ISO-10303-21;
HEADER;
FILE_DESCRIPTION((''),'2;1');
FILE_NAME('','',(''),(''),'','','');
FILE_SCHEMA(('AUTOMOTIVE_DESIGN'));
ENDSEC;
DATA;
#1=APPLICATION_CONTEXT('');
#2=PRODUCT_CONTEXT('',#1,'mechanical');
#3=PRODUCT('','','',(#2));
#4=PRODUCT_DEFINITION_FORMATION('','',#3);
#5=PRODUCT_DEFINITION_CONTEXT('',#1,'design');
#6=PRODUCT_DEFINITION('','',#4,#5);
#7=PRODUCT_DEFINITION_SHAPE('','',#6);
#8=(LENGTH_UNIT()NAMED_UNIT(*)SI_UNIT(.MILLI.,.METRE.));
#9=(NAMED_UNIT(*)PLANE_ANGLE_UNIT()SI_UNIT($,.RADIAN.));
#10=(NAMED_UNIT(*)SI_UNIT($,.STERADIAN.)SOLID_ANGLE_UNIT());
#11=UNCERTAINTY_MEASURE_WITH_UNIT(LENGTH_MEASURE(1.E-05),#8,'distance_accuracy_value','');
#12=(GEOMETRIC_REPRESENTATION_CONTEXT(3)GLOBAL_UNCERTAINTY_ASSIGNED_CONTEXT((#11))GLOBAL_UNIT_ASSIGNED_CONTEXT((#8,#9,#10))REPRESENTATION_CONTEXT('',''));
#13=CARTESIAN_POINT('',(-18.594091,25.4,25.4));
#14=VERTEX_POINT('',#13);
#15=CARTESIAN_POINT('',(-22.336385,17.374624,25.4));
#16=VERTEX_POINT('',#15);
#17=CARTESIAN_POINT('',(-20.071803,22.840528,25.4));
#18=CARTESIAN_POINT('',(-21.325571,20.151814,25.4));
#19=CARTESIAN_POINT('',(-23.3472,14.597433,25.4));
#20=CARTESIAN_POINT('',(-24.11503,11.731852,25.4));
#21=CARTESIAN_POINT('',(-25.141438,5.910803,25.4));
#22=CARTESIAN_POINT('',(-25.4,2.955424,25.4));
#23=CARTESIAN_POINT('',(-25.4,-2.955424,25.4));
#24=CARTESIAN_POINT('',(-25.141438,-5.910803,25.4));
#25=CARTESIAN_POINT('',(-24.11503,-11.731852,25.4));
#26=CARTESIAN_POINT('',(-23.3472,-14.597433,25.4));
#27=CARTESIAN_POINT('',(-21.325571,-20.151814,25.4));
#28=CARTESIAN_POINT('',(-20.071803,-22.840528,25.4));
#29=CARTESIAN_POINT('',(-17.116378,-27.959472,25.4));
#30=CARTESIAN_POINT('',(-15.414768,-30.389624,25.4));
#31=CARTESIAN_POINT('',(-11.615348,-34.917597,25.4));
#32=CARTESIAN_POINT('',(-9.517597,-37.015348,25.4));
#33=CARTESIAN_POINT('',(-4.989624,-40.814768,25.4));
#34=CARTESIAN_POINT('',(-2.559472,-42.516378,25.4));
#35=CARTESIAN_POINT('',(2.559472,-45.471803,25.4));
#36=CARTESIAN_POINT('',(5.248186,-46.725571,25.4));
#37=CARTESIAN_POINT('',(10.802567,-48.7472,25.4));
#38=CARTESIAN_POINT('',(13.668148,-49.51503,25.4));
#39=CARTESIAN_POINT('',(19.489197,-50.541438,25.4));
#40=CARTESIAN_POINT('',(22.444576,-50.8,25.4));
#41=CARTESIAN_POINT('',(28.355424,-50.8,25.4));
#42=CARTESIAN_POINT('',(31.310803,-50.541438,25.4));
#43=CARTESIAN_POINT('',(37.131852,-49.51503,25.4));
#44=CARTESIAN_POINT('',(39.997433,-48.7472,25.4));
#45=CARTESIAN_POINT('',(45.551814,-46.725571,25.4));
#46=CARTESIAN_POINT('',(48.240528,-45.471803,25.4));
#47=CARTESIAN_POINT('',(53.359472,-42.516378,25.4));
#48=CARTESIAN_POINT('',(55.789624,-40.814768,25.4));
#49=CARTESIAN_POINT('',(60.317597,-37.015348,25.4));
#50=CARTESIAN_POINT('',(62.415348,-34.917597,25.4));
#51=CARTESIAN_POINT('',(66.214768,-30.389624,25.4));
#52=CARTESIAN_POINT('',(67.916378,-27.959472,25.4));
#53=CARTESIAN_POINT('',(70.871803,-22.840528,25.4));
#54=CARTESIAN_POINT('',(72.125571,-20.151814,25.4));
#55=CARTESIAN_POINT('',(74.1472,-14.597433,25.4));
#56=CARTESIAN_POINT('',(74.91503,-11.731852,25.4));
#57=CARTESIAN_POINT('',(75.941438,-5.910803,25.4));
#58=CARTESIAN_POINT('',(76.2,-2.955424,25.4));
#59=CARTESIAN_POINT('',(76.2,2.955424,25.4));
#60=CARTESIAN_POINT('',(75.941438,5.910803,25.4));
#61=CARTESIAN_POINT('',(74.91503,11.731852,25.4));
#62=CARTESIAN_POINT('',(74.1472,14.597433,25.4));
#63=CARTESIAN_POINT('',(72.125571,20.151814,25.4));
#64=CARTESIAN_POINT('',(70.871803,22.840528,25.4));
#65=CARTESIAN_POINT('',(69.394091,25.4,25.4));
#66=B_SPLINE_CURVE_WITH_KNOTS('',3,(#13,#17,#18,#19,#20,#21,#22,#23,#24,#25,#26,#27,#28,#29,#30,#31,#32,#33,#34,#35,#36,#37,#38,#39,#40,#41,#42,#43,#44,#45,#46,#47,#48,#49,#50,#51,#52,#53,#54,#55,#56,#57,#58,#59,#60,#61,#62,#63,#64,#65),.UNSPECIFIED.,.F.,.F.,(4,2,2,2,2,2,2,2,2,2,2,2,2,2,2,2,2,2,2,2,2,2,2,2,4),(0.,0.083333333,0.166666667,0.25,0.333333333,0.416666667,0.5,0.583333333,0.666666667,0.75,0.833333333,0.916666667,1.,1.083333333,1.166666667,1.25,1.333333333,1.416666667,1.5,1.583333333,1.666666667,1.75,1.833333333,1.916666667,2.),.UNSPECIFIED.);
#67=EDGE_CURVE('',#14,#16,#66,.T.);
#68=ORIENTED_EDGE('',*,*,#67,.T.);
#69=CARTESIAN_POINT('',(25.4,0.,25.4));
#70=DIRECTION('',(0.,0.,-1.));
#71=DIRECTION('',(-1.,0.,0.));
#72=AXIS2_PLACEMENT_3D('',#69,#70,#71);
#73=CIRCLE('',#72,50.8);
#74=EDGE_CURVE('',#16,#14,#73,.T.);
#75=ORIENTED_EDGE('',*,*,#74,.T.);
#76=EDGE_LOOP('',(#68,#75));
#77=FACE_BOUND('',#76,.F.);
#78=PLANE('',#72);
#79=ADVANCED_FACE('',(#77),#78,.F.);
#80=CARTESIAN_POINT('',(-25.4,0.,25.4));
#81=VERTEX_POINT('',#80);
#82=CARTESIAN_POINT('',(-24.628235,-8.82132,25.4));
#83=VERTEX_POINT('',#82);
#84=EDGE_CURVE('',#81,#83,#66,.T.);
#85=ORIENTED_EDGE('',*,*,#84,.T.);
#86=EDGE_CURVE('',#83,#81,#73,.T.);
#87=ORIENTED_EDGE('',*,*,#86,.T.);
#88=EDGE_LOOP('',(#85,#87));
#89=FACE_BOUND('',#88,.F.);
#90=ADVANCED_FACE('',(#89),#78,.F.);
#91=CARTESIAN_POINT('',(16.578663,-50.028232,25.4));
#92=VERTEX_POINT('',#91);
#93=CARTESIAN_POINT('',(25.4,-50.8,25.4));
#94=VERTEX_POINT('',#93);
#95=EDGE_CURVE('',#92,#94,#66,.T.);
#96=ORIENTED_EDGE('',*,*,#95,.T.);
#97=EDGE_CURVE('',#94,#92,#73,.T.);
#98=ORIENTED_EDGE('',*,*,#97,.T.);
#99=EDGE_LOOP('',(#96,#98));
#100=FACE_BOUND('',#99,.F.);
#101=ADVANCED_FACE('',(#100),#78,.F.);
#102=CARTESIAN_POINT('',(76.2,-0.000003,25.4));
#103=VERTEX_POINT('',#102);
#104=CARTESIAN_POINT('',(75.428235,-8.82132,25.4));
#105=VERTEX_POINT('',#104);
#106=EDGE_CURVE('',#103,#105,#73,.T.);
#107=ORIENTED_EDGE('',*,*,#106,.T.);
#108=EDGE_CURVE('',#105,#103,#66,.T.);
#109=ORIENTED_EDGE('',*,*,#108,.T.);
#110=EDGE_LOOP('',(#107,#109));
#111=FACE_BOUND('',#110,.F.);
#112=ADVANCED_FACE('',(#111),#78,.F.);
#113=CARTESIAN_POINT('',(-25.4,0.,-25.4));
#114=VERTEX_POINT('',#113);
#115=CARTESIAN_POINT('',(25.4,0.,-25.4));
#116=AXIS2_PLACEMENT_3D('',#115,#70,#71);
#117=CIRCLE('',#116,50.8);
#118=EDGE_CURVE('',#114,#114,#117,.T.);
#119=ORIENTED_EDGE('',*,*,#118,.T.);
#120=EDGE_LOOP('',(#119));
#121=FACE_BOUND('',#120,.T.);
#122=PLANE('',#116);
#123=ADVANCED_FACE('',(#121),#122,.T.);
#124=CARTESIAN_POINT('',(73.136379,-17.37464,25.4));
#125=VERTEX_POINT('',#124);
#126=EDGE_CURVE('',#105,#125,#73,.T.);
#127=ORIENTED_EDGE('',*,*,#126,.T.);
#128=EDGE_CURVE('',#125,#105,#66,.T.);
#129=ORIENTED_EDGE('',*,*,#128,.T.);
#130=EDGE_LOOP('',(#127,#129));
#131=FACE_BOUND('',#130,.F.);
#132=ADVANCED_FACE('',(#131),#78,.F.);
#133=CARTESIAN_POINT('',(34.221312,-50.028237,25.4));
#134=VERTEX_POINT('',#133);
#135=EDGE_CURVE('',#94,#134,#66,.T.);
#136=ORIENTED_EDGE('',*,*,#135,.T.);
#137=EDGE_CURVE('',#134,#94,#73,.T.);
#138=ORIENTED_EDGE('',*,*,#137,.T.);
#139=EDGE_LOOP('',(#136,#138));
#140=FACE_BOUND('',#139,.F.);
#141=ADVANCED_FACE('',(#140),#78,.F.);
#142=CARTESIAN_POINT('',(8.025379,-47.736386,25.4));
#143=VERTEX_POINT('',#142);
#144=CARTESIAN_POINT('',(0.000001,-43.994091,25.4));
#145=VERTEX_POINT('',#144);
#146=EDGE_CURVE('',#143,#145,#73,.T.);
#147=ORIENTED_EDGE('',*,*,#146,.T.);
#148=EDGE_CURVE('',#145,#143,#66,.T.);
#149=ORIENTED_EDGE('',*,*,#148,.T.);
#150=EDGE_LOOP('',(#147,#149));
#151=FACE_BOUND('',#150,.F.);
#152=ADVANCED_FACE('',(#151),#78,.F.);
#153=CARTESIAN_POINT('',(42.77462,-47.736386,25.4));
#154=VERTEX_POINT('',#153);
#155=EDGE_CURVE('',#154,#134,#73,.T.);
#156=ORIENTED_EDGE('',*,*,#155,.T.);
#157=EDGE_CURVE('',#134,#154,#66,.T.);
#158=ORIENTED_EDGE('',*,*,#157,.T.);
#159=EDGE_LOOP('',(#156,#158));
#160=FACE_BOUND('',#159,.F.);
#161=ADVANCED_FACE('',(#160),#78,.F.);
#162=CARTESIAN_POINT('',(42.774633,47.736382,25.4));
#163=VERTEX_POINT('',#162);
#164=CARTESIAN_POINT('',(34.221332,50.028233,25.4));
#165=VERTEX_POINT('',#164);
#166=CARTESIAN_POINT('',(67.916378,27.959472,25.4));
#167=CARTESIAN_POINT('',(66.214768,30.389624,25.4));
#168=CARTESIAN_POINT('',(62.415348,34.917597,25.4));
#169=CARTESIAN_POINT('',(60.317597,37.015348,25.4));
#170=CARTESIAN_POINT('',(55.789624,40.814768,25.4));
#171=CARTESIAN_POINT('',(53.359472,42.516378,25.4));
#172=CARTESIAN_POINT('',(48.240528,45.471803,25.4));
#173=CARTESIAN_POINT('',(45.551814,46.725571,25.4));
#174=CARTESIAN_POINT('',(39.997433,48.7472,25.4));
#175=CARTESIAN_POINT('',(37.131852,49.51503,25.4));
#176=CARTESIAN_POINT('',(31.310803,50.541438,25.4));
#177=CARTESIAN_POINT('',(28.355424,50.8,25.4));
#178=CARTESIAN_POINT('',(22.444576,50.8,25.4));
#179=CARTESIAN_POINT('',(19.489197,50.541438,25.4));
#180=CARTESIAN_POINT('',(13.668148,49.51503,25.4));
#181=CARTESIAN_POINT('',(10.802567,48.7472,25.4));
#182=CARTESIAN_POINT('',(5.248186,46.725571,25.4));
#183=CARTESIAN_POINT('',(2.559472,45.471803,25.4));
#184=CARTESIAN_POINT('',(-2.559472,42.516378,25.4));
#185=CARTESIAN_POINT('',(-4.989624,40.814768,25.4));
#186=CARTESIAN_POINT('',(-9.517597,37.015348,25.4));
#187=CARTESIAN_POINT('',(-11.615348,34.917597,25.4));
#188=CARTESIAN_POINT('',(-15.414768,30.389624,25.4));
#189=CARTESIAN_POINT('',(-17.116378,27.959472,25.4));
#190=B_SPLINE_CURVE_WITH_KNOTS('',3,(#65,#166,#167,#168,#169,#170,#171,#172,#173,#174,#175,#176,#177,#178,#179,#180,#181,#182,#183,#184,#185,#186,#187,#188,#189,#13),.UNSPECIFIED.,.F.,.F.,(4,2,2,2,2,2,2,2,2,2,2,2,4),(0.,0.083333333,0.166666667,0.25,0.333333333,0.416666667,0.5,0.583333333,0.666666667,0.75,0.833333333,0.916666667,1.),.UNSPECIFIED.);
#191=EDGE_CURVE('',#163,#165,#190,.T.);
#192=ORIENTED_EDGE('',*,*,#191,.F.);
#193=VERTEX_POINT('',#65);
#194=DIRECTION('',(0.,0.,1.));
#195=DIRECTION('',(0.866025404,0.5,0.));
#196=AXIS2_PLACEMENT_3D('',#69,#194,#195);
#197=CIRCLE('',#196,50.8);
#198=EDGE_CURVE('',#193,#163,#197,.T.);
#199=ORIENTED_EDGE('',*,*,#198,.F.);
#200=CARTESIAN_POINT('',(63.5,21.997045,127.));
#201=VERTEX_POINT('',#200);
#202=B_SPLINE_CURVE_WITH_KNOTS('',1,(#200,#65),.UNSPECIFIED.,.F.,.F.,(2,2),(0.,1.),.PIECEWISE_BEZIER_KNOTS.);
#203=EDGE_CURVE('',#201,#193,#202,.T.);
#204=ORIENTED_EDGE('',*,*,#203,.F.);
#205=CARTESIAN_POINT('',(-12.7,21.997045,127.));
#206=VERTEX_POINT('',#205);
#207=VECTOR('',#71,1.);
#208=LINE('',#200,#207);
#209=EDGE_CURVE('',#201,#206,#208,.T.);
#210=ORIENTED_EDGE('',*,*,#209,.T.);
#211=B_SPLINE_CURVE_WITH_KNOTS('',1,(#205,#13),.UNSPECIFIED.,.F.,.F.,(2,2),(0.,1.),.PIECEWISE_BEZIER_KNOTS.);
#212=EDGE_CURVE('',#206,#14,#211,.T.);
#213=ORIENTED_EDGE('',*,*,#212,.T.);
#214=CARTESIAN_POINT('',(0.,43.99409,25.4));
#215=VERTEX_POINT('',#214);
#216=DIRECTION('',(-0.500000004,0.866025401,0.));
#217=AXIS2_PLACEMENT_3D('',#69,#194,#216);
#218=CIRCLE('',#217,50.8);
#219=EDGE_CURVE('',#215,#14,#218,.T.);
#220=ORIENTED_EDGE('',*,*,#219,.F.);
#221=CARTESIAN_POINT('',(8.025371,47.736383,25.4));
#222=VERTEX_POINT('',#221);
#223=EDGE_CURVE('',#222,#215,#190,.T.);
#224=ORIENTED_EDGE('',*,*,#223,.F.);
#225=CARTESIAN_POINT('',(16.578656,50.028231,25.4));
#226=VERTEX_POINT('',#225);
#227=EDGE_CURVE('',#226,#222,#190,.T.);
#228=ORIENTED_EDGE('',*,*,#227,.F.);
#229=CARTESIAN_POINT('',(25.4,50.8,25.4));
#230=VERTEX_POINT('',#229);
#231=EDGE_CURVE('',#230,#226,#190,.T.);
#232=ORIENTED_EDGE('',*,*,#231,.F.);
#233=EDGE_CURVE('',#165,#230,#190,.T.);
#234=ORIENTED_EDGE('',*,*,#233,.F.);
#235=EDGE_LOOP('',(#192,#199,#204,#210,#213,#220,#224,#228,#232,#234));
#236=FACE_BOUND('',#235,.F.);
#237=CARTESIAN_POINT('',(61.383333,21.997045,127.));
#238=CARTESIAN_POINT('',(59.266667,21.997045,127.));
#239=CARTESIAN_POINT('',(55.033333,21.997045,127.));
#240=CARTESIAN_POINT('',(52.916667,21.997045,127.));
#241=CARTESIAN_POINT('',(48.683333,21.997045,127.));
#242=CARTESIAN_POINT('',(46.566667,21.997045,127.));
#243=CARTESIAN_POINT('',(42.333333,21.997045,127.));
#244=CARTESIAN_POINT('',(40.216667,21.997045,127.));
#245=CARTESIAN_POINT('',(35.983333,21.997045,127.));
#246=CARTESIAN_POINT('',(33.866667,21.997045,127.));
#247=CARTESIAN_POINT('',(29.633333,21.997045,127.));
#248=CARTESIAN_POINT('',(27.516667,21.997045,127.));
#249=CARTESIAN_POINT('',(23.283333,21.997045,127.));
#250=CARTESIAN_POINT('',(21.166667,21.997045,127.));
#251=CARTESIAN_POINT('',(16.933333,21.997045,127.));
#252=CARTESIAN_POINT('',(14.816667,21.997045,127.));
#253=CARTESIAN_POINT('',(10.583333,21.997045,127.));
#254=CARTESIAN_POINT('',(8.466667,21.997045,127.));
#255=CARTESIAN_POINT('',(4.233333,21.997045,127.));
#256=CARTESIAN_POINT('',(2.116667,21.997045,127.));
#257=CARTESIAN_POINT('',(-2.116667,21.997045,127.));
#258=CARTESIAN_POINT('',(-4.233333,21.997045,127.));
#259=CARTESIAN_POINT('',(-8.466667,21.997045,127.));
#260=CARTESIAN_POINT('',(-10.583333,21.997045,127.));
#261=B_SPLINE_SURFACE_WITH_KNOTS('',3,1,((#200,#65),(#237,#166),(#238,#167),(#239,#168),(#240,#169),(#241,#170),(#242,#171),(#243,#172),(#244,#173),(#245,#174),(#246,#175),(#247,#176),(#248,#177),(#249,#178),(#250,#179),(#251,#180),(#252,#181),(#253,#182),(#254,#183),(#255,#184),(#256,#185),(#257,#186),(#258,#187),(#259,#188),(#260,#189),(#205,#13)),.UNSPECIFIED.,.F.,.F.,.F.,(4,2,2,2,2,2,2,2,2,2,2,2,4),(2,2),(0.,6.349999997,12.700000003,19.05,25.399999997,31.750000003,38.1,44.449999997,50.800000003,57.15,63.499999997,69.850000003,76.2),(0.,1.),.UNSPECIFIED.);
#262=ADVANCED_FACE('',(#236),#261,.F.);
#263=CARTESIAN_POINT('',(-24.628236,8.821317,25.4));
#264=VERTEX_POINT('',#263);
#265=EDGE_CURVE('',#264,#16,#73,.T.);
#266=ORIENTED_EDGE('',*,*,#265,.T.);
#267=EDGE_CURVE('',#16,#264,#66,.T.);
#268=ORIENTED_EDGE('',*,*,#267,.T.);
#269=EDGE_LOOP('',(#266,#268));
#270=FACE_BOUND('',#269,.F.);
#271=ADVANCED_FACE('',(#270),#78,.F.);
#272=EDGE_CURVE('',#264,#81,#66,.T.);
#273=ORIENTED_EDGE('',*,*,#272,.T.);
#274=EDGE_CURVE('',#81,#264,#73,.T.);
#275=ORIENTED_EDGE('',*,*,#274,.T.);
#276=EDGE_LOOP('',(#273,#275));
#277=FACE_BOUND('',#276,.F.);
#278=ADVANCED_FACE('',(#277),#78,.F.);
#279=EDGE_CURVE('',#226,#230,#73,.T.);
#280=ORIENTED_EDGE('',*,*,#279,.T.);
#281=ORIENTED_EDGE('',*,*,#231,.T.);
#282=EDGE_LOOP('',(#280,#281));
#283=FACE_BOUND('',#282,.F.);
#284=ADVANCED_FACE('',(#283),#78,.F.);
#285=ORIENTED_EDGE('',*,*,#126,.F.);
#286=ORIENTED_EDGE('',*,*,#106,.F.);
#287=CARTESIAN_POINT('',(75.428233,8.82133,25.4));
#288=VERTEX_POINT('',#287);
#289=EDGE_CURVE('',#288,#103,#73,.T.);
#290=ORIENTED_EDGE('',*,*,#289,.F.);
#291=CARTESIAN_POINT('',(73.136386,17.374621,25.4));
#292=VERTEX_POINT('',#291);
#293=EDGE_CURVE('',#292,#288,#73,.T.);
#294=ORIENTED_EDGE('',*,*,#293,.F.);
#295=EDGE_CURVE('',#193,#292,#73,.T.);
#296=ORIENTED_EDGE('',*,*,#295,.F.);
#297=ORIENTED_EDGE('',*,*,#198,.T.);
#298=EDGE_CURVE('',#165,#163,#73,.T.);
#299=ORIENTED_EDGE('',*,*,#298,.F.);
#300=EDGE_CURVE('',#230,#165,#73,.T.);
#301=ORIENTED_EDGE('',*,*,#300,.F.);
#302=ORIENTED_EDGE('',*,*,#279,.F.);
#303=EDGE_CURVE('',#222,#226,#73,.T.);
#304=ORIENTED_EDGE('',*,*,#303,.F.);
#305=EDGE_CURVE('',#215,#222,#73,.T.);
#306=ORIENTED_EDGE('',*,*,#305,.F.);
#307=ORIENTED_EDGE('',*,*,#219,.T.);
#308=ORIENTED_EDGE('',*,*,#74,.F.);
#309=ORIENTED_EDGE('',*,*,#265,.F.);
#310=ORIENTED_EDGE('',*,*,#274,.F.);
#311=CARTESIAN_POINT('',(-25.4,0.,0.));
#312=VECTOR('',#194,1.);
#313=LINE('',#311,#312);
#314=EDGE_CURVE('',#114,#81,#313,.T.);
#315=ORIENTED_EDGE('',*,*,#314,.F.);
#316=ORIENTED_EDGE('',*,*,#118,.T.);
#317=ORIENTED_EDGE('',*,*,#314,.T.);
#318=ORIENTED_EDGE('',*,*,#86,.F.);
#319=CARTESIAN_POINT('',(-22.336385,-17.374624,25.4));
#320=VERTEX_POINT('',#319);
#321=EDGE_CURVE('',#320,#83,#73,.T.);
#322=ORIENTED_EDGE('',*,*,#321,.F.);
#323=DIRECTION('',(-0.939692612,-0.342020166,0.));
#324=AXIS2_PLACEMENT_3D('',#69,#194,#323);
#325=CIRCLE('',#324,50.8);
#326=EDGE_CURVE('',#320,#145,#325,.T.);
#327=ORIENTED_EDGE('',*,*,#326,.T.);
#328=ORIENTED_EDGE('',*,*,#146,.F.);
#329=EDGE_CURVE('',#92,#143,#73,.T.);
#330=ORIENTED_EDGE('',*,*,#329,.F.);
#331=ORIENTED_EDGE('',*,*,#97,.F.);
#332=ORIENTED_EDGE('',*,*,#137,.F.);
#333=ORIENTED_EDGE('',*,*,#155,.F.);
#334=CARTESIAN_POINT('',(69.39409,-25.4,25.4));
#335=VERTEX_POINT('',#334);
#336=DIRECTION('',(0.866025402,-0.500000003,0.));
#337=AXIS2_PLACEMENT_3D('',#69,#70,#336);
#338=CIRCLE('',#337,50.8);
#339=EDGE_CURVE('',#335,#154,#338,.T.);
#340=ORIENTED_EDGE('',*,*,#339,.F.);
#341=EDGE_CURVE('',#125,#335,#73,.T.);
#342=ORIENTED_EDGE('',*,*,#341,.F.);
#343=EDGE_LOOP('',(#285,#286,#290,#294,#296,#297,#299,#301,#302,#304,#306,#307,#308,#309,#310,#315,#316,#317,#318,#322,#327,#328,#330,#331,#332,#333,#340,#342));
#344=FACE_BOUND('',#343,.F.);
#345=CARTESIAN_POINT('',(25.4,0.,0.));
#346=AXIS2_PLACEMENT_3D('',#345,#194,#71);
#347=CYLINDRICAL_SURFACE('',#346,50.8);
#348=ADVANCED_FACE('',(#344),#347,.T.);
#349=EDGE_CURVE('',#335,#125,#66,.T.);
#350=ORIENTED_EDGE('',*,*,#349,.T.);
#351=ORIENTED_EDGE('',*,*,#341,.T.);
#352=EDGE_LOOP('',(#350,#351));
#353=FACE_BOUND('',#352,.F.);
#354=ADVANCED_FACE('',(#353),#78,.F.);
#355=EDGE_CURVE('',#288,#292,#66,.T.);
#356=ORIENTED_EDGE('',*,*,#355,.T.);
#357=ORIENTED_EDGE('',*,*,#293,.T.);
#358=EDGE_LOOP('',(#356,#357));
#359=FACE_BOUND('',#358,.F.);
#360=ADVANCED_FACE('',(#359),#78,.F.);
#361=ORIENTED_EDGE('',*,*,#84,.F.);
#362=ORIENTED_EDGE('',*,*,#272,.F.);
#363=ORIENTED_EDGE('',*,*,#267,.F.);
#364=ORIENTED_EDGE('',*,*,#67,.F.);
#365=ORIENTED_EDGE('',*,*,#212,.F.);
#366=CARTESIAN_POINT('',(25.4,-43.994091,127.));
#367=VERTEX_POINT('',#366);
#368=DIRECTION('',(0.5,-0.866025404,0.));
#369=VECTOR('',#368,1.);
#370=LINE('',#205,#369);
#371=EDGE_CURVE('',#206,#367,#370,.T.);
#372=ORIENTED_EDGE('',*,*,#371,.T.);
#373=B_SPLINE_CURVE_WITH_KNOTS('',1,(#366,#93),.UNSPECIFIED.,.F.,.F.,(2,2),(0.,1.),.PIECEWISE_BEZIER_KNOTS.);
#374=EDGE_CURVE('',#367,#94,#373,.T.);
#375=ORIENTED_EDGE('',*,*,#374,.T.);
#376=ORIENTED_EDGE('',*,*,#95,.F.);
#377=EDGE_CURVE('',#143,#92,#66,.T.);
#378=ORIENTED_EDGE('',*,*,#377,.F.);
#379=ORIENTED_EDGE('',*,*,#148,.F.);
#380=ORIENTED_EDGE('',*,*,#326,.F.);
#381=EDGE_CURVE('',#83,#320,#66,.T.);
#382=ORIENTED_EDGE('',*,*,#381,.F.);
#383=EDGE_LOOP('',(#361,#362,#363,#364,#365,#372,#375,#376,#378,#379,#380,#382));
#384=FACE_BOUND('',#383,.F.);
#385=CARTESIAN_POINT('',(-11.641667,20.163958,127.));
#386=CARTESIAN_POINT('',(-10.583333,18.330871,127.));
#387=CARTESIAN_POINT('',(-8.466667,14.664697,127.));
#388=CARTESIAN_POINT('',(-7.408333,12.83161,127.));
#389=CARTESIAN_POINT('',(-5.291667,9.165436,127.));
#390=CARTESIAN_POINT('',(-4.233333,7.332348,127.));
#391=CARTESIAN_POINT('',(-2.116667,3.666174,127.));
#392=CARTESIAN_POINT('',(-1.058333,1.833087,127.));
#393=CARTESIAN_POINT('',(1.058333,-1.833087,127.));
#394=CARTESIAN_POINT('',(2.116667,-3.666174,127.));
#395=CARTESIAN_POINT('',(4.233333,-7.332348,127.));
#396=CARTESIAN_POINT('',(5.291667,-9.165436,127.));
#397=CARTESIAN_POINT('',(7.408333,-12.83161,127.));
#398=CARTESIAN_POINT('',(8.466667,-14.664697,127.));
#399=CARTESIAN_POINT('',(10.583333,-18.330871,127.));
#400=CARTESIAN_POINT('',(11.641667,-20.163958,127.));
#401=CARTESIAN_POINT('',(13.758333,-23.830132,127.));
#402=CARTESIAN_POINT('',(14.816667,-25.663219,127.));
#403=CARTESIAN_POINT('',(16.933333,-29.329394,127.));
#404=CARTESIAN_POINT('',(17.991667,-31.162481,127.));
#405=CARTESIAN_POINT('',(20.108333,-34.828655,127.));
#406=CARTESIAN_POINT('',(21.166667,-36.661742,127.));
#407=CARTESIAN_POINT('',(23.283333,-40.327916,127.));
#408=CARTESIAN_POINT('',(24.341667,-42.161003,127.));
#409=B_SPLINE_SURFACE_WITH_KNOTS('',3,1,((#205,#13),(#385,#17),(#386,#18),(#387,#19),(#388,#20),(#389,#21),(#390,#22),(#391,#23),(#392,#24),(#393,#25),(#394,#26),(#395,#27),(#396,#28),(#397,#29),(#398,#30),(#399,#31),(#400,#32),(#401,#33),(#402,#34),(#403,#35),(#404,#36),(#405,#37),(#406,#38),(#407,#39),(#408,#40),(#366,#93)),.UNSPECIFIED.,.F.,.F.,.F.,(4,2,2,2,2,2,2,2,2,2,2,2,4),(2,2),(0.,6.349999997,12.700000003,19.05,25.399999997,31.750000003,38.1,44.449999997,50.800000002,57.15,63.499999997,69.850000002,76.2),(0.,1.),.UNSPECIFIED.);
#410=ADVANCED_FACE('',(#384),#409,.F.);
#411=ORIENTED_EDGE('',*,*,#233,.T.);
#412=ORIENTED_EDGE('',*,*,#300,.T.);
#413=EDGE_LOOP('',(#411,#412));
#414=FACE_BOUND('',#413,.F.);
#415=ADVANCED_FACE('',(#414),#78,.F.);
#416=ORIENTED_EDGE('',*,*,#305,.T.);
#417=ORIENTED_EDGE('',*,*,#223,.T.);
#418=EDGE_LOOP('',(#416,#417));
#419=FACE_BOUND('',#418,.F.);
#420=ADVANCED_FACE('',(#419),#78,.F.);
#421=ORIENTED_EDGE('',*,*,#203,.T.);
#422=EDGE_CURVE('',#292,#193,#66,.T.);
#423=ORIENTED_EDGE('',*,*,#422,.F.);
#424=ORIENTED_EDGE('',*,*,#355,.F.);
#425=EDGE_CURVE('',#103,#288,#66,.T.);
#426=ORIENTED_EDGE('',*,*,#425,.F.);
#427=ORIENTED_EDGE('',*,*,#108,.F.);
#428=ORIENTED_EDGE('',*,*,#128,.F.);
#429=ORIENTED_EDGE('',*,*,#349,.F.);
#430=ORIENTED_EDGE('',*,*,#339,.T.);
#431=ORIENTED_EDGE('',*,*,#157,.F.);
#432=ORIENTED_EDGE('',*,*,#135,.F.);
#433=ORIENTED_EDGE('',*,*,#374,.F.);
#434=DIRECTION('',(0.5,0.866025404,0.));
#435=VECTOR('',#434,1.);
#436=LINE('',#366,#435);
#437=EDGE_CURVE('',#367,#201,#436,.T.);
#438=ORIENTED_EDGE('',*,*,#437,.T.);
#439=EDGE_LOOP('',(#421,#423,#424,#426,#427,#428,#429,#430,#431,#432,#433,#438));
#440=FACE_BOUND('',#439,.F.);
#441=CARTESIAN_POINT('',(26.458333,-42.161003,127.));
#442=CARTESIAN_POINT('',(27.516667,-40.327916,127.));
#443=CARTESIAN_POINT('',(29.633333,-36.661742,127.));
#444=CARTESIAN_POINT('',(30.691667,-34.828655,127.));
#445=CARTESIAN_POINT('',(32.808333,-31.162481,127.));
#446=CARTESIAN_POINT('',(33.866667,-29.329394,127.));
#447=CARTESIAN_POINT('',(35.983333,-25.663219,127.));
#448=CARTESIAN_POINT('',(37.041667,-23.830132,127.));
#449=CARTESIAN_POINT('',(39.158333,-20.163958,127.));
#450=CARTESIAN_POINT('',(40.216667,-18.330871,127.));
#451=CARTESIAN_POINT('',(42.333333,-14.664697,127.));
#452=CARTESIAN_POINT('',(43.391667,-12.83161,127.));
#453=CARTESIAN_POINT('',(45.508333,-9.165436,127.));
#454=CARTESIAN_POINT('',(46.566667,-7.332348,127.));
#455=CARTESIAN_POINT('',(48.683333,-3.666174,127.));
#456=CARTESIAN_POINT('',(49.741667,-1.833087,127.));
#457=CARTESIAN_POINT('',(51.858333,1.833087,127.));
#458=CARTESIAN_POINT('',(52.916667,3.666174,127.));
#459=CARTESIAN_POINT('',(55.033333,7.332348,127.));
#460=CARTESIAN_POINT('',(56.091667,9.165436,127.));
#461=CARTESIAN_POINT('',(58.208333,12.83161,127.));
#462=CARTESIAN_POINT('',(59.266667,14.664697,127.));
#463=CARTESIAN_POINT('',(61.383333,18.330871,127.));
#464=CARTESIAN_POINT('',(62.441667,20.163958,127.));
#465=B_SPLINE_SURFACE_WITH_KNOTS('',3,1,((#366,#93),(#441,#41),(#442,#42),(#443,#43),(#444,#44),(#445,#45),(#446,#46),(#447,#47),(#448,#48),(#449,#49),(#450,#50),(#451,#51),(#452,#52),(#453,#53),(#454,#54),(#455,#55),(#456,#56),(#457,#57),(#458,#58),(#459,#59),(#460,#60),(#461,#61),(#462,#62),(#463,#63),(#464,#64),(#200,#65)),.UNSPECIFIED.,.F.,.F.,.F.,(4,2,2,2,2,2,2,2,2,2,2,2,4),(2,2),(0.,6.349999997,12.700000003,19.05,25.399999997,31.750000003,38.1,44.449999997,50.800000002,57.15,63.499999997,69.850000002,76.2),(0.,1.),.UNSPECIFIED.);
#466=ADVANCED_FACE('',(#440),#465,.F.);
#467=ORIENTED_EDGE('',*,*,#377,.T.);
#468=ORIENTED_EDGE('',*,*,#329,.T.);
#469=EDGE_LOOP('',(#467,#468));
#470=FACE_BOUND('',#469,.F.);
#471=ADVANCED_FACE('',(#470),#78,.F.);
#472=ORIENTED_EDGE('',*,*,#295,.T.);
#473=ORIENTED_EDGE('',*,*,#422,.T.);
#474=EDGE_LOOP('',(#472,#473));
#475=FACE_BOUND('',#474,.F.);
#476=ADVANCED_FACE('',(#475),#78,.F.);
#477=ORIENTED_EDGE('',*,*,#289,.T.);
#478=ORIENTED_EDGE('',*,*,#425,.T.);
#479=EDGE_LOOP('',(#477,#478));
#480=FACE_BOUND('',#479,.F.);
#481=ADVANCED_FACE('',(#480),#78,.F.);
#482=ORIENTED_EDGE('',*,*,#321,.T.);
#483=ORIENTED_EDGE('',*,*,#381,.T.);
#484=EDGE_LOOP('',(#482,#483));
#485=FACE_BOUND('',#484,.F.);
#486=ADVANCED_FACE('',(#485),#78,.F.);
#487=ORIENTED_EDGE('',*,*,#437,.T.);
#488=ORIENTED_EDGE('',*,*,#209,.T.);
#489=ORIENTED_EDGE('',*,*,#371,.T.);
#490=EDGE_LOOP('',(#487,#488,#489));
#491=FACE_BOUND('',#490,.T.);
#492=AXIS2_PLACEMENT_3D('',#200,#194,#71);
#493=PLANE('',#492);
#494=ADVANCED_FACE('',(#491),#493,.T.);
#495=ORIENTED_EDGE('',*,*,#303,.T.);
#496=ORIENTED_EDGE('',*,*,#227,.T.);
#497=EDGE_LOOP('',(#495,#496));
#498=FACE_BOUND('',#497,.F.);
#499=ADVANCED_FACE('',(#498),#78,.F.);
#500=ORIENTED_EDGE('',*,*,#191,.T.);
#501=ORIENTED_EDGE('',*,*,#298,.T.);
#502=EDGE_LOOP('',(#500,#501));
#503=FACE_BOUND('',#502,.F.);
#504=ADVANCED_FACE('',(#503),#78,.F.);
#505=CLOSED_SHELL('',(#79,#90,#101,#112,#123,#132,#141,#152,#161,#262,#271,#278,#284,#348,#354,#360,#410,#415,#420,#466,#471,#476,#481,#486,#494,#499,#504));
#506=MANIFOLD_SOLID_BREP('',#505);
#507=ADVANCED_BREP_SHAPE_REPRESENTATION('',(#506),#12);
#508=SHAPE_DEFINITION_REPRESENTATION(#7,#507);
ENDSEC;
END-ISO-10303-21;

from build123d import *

# Parameters (mm, degrees)
F0_W = 50.8
F0_H = 50.8


# Not quite as in the source:
# - the arcs of a loft's sections are written as splines that run evenly, so that the points pair up as in the source's solid


with BuildPart() as f1:
    # F0 (on Front) → F1 (revolve)
    with BuildSketch(Plane.XZ):
        Rectangle(F0_W, F0_H)
    revolve(axis=Axis((25.4, 0, 0), (0, 0, -1)))

    # F3 (on offset) → F5 section 0
    with BuildSketch(Plane.XY.offset(127)):
        Polygon((63.5, 21.9970452561), (-12.7, 21.9970452561), (25.4, -43.9940905122), align=None)
    # F4 (on face) → F5 section 1
    with BuildSketch(Plane.XY.offset(25.4)):
        with BuildLine():
            add(Edge.make_bspline(
                [(69.3940905122, 25.4), (67.9163784122, 27.9594724362), (66.2147677676, 30.3896242866), (62.4153476533, 34.9175968576), (60.3175968576, 37.0153476533), (55.7896242866, 40.8147677676), (53.3594724362, 42.5163784122), (48.2405275638, 45.4718026123), (45.551813593, 46.7255705274), (39.9974329689, 48.7471997444), (37.1318520911, 49.5150298264), (31.3108027598, 50.5414378796), (28.3554242, 50.8), (22.4445758, 50.8), (19.4891972402, 50.5414378796), (13.6681479089, 49.5150298264), (10.8025670311, 48.7471997444), (5.248186407, 46.7255705274), (2.5594724362, 45.4718026123), (-2.5594724362, 42.5163784122), (-4.9896242866, 40.8147677676), (-9.5175968576, 37.0153476533), (-11.6153476533, 34.9175968576), (-15.4147677676, 30.3896242866), (-17.1163784122, 27.9594724362), (-18.5940905122, 25.4)],
                knots=[0, 0, 0, 0, 0.0833333333, 0.0833333333, 0.1666666667, 0.1666666667, 0.25, 0.25, 0.3333333333, 0.3333333333, 0.4166666667, 0.4166666667, 0.5, 0.5, 0.5833333333, 0.5833333333, 0.6666666667, 0.6666666667, 0.75, 0.75, 0.8333333333, 0.8333333333, 0.9166666667, 0.9166666667, 1, 1, 1, 1], degree=3))
            add(Edge.make_bspline(
                [(-18.5940905122, 25.4), (-20.0718026123, 22.8405275638), (-21.3255705274, 20.151813593), (-23.3471997444, 14.5974329689), (-24.1150298264, 11.7318520911), (-25.1414378796, 5.9108027598), (-25.4, 2.9554242), (-25.4, -2.9554242), (-25.1414378796, -5.9108027598), (-24.1150298264, -11.7318520911), (-23.3471997444, -14.5974329689), (-21.3255705274, -20.151813593), (-20.0718026123, -22.8405275638), (-17.1163784122, -27.9594724362), (-15.4147677676, -30.3896242866), (-11.6153476533, -34.9175968576), (-9.5175968576, -37.0153476533), (-4.9896242866, -40.8147677676), (-2.5594724362, -42.5163784122), (2.5594724362, -45.4718026123), (5.248186407, -46.7255705274), (10.8025670311, -48.7471997444), (13.6681479089, -49.5150298264), (19.4891972402, -50.5414378796), (22.4445758, -50.8), (25.4, -50.8)],
                knots=[0, 0, 0, 0, 0.0833333333, 0.0833333333, 0.1666666667, 0.1666666667, 0.25, 0.25, 0.3333333333, 0.3333333333, 0.4166666667, 0.4166666667, 0.5, 0.5, 0.5833333333, 0.5833333333, 0.6666666667, 0.6666666667, 0.75, 0.75, 0.8333333333, 0.8333333333, 0.9166666667, 0.9166666667, 1, 1, 1, 1], degree=3))
            add(Edge.make_bspline(
                [(25.4, -50.8), (28.3554242, -50.8), (31.3108027598, -50.5414378796), (37.1318520911, -49.5150298264), (39.9974329689, -48.7471997444), (45.551813593, -46.7255705274), (48.2405275638, -45.4718026123), (53.3594724362, -42.5163784122), (55.7896242866, -40.8147677676), (60.3175968576, -37.0153476533), (62.4153476533, -34.9175968576), (66.2147677676, -30.3896242866), (67.9163784122, -27.9594724362), (70.8718026123, -22.8405275638), (72.1255705274, -20.151813593), (74.1471997444, -14.5974329689), (74.9150298264, -11.7318520911), (75.9414378796, -5.9108027598), (76.2, -2.9554242), (76.2, 2.9554242), (75.9414378796, 5.9108027598), (74.9150298264, 11.7318520911), (74.1471997444, 14.5974329689), (72.1255705274, 20.151813593), (70.8718026123, 22.8405275638), (69.3940905122, 25.4)],
                knots=[0, 0, 0, 0, 0.0833333333, 0.0833333333, 0.1666666667, 0.1666666667, 0.25, 0.25, 0.3333333333, 0.3333333333, 0.4166666667, 0.4166666667, 0.5, 0.5, 0.5833333333, 0.5833333333, 0.6666666667, 0.6666666667, 0.75, 0.75, 0.8333333333, 0.8333333333, 0.9166666667, 0.9166666667, 1, 1, 1, 1], degree=3))
        make_face()
    loft(ruled=True)


solid = f1.part
